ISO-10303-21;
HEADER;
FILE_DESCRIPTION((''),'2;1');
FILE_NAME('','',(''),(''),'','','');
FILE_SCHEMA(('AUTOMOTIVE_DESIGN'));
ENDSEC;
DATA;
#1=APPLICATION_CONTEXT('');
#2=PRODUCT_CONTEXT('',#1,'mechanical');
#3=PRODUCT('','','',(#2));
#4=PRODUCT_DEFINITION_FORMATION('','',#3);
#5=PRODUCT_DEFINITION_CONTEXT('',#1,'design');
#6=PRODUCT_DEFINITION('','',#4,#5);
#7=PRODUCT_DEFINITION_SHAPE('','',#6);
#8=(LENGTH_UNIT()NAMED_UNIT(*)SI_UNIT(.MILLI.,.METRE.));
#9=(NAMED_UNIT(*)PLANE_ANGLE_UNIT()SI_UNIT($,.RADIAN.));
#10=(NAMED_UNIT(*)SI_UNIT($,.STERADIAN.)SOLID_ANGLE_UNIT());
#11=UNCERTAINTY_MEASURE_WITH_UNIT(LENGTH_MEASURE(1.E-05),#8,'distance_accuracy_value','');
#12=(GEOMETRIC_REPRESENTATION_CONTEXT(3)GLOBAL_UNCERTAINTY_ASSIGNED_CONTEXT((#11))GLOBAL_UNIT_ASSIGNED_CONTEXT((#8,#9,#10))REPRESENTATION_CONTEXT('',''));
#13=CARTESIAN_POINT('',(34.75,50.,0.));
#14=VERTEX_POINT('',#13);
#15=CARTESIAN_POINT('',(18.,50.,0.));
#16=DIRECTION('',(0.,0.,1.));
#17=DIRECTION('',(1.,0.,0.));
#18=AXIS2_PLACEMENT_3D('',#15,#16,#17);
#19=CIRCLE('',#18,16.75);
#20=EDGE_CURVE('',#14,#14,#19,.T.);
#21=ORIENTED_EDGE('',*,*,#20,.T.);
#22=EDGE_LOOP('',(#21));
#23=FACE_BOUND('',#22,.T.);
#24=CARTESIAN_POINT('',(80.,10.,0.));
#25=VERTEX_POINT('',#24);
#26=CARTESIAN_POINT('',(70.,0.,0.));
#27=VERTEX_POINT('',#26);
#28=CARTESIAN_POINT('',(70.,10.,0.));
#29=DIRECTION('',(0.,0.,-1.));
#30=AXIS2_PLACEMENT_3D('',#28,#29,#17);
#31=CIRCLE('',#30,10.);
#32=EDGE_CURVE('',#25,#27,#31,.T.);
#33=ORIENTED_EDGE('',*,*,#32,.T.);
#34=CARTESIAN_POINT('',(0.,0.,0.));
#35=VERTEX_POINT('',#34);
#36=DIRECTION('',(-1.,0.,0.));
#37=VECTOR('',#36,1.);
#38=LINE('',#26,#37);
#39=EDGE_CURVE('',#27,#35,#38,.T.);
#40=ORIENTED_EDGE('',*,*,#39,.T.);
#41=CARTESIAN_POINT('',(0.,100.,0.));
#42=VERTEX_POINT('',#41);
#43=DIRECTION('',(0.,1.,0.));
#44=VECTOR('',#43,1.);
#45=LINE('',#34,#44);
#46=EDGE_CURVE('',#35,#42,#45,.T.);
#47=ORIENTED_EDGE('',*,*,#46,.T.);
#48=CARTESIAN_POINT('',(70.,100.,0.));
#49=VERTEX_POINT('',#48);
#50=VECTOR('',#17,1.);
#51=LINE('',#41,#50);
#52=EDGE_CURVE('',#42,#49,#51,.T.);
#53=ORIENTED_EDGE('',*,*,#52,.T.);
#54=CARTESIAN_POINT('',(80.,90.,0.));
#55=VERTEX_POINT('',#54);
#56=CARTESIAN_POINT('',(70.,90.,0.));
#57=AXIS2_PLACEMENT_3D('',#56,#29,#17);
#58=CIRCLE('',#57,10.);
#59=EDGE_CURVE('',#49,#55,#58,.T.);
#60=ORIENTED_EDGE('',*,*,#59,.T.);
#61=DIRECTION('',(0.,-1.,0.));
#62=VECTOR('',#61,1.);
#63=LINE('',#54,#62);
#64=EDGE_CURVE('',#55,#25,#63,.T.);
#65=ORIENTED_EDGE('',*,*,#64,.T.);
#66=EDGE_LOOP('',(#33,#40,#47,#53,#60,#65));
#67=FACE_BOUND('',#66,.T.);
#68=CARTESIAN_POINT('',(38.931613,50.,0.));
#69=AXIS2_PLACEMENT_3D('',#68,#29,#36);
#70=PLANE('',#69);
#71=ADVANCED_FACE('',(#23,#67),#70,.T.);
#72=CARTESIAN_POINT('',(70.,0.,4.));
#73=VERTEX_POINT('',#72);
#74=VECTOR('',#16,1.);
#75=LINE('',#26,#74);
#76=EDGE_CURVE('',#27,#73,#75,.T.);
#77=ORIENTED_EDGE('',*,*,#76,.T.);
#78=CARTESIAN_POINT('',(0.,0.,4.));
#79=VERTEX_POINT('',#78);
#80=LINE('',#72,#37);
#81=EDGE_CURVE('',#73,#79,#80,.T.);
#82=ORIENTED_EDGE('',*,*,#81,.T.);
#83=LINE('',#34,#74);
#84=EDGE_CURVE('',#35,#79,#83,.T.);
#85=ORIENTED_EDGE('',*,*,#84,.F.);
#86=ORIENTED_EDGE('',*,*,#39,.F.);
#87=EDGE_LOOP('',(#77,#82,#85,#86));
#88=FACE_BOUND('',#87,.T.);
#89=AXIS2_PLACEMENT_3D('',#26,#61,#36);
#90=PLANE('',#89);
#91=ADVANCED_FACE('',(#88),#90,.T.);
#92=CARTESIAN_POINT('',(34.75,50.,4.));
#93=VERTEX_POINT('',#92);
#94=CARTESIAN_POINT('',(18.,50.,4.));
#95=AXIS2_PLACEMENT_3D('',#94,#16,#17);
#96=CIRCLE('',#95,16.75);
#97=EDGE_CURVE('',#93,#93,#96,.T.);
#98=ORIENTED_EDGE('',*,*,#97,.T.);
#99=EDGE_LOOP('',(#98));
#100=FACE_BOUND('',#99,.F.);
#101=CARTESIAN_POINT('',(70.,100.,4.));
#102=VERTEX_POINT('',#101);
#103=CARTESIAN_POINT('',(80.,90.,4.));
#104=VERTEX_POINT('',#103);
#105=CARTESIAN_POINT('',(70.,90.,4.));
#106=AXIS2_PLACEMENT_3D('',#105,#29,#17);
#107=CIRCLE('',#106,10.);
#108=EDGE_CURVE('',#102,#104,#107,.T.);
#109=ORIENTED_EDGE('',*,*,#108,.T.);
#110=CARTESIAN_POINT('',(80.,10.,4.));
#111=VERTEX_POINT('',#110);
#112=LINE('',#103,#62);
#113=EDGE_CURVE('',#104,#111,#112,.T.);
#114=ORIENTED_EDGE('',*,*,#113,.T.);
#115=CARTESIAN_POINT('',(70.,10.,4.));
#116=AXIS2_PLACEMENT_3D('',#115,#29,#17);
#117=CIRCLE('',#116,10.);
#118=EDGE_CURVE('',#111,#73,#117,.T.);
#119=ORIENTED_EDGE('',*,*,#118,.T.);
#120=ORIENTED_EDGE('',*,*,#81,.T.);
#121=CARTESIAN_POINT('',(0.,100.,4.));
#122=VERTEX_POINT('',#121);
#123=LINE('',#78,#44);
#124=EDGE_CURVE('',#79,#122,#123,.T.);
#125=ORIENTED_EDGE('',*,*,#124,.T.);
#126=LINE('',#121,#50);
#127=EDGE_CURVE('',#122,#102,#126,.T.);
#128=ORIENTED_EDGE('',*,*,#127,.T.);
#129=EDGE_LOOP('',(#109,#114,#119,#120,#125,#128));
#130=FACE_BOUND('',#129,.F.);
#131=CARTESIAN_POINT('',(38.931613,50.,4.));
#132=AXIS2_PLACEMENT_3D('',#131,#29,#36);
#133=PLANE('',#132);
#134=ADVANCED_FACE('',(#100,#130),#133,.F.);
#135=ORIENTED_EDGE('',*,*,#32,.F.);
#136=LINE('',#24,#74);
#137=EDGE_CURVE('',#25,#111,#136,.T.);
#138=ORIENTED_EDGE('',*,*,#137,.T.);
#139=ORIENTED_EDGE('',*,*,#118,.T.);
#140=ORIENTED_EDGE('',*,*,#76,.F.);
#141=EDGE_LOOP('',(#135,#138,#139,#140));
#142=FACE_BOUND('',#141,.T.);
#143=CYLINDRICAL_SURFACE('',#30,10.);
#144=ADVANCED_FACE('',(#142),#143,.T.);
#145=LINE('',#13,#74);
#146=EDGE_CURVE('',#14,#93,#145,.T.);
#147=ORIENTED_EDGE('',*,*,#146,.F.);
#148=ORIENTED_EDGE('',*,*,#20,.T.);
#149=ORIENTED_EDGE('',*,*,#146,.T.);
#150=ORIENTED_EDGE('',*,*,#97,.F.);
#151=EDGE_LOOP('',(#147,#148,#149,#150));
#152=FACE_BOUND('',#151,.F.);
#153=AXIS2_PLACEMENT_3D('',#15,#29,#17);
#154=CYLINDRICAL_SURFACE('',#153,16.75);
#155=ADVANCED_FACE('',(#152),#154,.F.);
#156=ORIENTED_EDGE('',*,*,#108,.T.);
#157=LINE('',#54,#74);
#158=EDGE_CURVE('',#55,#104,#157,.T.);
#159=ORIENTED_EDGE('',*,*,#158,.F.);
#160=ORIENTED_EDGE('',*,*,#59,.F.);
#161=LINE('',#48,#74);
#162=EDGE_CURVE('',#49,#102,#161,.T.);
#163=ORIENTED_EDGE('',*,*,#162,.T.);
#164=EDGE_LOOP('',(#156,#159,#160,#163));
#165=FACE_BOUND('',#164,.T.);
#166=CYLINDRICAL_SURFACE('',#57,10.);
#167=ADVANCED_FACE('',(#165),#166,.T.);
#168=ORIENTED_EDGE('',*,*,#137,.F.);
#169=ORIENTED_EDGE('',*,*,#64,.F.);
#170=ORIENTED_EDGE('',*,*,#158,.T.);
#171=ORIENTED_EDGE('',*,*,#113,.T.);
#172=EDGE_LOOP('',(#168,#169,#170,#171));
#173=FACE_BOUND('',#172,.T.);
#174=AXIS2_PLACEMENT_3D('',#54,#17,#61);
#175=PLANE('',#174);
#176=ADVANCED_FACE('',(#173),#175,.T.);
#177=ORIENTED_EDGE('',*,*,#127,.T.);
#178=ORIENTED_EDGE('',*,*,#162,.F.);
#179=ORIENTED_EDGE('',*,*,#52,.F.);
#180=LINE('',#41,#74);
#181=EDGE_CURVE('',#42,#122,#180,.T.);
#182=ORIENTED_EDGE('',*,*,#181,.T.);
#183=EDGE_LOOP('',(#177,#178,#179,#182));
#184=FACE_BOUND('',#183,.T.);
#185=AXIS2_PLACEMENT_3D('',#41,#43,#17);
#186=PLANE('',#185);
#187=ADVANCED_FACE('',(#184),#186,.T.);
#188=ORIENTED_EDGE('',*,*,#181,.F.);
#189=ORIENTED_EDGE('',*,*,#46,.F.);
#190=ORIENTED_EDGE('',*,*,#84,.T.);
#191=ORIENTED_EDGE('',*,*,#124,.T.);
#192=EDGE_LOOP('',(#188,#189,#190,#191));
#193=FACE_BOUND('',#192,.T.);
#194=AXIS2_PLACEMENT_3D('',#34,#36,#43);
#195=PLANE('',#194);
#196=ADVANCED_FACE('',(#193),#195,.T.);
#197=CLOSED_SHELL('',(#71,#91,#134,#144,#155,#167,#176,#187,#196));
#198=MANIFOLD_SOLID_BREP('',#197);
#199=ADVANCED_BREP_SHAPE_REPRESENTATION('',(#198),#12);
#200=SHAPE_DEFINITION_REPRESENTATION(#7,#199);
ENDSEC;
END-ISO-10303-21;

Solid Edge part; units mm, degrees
sketch "Sketch1" plane through (0, 0, 0) normal (0, 0, 1) x (1, 0, 0)
  arc A0 (70, 100) -> (80, 90) centre (70, 90) cw
  line L0 (80, 90) -> (80, 10)
  arc A1 (80, 10) -> (70, 0) centre (70, 10) cw
  line L1 (70, 0) -> (0, 0)
  line L2 (0, 0) -> (0, 100)
  line L3 (0, 100) -> (70, 100)
  circle A2 centre (18, 50) radius 16.75
extrude "Protrusion1" add sketch "Sketch1" along normal blind 4
properties material "Acrílico, alto impacto"
